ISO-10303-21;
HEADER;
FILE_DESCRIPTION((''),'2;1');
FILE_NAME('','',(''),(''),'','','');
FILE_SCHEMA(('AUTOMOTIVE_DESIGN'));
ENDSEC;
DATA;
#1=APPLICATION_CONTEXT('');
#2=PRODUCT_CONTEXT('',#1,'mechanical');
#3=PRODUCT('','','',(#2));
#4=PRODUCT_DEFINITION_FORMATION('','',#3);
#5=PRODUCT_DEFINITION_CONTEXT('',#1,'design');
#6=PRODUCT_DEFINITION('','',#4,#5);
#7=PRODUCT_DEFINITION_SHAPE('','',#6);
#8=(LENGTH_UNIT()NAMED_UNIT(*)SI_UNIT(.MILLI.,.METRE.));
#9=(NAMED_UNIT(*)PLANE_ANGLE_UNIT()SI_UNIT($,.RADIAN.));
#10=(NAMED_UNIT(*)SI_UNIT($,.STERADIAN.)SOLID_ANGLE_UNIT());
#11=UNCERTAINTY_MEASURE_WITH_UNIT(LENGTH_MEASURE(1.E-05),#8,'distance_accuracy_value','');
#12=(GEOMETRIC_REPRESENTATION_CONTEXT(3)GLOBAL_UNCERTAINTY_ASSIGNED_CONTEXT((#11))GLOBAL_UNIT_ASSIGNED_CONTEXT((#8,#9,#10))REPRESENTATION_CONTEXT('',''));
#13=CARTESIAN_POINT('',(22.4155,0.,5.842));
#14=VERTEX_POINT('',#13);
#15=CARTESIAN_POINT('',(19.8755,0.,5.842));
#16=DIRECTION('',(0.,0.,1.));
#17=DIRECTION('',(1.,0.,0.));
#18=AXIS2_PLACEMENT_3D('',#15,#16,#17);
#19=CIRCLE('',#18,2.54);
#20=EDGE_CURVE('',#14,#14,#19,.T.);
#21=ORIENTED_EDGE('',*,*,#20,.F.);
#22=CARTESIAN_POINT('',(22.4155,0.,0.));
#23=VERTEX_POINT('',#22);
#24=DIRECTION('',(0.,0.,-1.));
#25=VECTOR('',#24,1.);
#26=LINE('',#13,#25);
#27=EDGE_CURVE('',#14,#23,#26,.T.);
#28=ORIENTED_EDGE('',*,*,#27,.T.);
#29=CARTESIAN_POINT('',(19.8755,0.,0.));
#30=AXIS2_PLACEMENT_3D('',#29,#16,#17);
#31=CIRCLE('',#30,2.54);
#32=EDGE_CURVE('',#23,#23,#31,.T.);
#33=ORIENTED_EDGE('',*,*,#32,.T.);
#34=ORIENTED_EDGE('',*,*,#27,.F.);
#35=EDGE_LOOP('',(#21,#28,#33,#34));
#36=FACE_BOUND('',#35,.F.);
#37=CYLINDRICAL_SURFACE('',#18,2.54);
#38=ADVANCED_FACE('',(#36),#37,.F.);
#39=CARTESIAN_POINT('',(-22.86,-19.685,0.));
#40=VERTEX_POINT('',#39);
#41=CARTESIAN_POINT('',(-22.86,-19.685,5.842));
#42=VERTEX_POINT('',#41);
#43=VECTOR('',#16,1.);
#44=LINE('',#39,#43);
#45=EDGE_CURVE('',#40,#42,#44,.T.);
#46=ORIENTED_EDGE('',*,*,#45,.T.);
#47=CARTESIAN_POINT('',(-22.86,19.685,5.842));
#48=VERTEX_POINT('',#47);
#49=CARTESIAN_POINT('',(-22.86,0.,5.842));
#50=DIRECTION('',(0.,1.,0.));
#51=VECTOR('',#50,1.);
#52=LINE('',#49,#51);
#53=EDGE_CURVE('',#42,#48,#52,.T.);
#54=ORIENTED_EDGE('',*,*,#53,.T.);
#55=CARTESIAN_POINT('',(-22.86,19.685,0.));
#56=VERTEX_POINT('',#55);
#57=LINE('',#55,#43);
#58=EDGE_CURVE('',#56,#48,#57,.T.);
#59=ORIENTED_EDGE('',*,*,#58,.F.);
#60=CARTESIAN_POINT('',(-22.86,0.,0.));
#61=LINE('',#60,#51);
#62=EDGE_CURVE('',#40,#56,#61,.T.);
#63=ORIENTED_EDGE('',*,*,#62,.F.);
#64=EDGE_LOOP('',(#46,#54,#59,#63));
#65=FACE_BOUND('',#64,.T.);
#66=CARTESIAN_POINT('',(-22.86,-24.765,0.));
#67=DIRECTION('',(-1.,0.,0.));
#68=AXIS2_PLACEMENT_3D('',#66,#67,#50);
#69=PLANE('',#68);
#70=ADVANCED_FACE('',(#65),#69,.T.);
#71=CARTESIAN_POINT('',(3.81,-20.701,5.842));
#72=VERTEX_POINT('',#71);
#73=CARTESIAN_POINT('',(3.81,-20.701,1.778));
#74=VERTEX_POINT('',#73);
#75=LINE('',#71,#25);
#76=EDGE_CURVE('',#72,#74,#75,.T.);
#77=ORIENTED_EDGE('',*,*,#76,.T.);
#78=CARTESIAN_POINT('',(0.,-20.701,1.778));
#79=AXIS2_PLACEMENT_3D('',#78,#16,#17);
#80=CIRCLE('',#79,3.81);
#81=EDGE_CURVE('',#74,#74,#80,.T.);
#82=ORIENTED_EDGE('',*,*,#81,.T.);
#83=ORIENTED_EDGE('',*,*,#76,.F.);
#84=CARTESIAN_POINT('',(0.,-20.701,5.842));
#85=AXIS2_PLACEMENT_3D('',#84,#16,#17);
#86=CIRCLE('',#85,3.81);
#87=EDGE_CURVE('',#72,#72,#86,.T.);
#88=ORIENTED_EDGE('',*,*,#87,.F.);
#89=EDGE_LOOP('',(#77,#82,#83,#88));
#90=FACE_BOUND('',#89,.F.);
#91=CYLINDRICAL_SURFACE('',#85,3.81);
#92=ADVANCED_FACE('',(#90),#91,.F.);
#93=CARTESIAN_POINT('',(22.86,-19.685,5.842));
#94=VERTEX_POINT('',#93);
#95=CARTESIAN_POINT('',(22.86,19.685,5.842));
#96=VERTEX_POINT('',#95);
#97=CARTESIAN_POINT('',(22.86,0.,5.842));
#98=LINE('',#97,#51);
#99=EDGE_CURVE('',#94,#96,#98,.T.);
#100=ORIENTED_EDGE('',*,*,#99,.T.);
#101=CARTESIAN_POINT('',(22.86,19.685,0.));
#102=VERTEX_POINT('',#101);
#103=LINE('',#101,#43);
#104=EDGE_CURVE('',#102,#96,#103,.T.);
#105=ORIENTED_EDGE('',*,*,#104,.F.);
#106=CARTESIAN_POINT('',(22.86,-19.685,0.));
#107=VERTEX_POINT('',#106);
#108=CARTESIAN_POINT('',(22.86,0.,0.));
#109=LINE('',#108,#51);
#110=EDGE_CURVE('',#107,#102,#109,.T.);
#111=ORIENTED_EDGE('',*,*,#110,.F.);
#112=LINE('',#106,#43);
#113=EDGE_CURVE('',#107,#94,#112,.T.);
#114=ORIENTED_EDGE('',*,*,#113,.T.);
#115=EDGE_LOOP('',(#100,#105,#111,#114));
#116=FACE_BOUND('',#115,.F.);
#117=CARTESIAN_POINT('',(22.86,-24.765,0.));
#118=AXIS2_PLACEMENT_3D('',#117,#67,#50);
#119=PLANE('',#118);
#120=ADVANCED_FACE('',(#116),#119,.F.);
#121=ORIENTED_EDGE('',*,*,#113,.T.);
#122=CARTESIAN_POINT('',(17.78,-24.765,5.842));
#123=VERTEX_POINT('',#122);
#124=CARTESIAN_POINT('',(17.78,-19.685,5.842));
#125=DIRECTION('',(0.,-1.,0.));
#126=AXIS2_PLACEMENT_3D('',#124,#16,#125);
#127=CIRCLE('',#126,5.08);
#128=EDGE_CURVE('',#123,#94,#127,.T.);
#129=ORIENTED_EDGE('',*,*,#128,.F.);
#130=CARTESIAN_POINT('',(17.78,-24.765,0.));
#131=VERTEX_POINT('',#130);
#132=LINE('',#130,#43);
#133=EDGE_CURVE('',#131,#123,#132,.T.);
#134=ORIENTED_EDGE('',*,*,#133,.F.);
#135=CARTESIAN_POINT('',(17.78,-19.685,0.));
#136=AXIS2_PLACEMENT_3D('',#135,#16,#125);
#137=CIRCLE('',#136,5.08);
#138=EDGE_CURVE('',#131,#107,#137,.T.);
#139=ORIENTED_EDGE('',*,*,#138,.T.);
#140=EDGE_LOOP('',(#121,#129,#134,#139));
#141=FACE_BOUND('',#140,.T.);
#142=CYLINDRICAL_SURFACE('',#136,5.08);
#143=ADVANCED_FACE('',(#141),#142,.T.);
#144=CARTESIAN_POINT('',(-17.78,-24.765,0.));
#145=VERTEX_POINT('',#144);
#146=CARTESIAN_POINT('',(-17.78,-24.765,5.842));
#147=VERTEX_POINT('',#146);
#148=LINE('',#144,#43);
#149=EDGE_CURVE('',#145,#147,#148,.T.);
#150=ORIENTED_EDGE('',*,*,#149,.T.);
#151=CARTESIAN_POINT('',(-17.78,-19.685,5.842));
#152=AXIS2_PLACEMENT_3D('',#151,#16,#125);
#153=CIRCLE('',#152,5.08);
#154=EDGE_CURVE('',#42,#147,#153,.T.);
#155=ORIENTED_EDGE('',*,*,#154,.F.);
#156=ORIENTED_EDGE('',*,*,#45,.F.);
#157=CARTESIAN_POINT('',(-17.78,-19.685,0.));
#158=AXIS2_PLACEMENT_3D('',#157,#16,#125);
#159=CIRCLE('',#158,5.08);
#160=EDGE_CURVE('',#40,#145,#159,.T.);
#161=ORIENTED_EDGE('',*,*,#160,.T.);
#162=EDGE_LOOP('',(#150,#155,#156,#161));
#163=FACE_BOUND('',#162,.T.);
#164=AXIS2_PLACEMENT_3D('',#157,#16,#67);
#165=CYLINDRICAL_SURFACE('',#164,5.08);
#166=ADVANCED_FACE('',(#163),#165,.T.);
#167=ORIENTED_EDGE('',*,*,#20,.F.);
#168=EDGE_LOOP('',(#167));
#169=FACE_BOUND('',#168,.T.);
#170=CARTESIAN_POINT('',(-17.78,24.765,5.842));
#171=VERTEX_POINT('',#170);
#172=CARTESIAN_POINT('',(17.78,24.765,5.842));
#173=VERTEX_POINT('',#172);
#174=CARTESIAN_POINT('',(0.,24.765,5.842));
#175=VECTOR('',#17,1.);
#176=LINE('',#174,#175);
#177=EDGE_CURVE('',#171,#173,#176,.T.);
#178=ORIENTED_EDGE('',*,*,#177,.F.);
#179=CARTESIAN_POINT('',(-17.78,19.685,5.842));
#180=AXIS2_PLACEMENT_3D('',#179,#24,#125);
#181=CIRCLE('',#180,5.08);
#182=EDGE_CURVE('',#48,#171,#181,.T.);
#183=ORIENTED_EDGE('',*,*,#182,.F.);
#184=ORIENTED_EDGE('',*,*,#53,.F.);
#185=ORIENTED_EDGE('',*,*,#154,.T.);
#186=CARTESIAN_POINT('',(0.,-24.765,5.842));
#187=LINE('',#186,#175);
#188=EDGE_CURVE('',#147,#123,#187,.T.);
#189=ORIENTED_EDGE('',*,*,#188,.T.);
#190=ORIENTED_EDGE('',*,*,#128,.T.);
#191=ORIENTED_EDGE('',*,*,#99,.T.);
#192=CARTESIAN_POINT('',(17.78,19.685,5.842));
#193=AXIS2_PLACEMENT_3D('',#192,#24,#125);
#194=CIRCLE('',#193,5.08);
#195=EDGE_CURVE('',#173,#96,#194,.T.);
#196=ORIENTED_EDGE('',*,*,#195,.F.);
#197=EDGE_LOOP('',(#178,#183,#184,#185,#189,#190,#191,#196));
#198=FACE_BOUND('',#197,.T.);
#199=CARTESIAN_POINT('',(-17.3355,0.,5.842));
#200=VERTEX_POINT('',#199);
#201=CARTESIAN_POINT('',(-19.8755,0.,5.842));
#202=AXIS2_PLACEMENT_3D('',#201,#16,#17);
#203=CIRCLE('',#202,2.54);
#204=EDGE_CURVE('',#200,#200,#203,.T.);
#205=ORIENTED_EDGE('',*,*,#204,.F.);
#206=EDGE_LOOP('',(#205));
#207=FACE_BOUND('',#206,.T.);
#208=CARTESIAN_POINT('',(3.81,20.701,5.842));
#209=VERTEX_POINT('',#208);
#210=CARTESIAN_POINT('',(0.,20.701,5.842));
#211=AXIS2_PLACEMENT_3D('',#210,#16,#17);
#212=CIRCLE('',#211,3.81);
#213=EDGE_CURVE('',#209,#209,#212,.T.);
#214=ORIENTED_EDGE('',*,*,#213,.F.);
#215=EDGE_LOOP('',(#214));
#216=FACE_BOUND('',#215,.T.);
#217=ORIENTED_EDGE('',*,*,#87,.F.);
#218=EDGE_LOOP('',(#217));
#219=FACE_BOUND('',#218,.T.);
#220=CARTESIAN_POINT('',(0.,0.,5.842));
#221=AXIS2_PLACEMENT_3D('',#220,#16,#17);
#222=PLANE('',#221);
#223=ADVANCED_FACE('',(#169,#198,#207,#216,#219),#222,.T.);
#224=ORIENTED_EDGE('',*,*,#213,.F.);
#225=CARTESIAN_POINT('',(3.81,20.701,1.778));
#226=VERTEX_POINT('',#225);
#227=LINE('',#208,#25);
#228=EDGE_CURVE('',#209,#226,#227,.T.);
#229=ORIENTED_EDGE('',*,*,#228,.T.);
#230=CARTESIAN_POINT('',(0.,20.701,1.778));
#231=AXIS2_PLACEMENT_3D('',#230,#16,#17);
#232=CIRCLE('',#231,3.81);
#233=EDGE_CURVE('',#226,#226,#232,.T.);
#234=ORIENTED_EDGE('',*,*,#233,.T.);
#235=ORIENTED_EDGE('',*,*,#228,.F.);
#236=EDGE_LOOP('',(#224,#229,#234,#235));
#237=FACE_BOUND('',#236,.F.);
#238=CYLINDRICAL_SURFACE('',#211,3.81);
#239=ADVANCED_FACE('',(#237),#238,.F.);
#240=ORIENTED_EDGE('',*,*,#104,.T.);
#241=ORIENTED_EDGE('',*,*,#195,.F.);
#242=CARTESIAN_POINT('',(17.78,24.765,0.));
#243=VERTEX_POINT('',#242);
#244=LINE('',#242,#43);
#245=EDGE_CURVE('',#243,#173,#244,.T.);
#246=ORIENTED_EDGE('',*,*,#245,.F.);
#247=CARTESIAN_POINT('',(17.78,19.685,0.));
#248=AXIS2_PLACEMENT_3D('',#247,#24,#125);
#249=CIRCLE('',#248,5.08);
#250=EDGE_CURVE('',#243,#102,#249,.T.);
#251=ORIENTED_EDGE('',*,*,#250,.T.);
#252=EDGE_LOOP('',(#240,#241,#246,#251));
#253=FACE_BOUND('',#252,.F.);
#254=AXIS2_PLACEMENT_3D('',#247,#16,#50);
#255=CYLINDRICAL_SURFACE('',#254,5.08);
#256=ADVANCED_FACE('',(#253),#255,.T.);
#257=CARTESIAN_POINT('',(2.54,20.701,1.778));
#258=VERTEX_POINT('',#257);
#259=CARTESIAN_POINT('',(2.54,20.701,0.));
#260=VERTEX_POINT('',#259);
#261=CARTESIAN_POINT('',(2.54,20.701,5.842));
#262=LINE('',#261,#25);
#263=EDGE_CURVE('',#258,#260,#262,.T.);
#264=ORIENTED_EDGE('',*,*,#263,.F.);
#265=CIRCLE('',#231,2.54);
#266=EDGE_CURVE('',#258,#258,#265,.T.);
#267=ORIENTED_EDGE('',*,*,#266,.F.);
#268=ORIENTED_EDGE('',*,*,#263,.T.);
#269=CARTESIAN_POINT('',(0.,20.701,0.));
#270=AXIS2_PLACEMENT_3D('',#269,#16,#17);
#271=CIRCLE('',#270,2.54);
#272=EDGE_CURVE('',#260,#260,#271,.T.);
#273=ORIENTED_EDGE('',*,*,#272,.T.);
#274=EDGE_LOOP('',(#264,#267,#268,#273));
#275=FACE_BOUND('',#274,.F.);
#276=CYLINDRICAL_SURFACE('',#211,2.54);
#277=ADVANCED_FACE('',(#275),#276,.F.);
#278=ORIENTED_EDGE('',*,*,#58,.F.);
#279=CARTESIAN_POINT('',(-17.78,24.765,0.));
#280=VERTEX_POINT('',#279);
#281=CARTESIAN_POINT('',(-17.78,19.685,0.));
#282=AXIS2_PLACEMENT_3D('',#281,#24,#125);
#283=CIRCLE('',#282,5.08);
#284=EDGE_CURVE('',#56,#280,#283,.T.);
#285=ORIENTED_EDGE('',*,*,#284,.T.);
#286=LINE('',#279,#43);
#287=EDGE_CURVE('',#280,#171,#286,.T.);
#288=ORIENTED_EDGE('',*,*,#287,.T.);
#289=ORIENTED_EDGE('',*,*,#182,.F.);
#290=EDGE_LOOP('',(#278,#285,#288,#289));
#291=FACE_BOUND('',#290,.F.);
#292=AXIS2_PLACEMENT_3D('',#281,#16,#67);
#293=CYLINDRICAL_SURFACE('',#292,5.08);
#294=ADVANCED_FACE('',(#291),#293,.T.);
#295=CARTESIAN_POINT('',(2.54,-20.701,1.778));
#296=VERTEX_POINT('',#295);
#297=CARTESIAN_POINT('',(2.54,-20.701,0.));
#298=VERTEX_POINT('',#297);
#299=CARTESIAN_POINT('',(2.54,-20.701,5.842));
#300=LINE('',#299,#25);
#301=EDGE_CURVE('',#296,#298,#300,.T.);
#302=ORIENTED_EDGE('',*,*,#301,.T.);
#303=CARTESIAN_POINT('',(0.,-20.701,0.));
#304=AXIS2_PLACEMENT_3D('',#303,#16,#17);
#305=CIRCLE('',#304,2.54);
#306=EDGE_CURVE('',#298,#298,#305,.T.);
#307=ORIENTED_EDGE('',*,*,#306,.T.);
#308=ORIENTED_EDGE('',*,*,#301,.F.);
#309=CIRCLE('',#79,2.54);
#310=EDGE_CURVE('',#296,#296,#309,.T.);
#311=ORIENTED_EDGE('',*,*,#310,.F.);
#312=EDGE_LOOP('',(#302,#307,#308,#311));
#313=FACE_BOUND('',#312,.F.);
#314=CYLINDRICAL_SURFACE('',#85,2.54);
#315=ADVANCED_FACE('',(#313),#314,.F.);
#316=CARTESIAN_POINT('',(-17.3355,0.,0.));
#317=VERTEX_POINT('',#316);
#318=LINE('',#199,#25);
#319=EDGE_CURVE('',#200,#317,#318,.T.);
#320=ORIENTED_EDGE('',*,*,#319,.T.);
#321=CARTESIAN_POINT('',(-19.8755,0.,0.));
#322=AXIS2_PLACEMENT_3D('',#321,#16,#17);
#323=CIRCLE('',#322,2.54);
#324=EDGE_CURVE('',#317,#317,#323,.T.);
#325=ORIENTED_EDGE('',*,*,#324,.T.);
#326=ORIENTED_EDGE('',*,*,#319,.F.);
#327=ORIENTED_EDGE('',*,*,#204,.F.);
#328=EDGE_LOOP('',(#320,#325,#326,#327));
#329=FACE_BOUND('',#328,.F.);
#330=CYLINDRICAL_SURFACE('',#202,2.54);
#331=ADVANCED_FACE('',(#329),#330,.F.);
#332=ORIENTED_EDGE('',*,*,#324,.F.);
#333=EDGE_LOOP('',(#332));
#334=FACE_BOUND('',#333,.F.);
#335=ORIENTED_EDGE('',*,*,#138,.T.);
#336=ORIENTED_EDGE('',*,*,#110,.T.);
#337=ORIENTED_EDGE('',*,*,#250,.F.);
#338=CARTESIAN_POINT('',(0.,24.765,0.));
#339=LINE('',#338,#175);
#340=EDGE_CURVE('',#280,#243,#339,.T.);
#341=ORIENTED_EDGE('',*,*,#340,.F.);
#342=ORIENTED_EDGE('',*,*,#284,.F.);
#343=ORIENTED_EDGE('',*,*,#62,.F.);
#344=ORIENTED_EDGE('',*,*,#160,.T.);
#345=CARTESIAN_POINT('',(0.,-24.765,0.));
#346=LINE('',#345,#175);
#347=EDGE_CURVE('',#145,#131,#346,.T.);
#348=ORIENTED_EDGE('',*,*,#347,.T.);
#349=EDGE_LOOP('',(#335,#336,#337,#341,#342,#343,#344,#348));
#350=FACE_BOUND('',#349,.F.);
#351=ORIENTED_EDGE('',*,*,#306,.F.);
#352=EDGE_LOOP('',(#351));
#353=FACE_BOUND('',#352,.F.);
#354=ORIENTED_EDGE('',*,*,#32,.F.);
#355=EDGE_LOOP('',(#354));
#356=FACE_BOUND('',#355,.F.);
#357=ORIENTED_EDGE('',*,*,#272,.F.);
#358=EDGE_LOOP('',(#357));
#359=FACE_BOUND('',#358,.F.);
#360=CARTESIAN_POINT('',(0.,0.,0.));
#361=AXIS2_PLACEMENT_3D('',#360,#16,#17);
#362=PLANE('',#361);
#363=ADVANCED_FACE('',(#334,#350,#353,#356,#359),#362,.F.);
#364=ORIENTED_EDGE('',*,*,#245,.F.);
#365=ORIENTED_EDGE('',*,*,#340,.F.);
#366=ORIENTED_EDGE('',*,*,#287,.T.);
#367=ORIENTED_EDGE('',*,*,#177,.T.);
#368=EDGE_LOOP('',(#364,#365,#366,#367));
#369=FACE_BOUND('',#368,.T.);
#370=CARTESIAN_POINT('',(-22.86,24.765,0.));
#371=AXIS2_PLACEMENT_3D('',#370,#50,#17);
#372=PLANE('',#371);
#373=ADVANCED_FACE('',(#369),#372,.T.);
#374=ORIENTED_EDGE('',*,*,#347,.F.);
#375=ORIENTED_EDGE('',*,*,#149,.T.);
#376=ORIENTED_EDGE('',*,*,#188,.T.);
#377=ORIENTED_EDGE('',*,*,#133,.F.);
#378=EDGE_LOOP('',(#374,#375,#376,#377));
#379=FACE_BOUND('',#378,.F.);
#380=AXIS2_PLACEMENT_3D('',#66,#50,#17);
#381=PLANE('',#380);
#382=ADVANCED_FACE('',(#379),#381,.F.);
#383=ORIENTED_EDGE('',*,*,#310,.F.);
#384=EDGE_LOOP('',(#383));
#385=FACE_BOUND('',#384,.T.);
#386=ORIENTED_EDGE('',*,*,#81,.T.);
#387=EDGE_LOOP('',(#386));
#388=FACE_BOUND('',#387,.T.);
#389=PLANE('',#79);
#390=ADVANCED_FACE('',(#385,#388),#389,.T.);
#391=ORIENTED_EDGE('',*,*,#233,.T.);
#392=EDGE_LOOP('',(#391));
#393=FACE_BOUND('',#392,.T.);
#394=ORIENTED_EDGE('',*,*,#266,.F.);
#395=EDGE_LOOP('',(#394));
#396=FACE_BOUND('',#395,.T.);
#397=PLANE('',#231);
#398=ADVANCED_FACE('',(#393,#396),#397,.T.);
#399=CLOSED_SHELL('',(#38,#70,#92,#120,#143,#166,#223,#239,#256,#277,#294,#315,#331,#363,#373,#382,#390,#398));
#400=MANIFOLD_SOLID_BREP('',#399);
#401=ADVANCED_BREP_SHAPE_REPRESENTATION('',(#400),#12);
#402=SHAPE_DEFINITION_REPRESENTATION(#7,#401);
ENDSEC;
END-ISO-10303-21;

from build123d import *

# Parameters (mm, degrees)
F0_W     = 45.72
F0_H     = 49.53
F1_DEPTH = 5.842
F2_R     = 2.54
F3_DEPTH = 25.4
F4_R     = 3.81
F5_DEPTH = 4.064
F6_R     = 2.54
F7_DEPTH = 25.4
F8_R     = 5.08


# Not quite as in the source:
# - a feature names something its author has since deleted; it is built from what else it names


with BuildPart() as f1:
    # F0 (on Top) → F1 (new body)
    with BuildSketch(Plane.XY):
        Rectangle(F0_W, F0_H)
    extrude(amount=F1_DEPTH)

    # F2 (on face) → F3 (cut)
    with BuildSketch(Plane.XY.offset(5.842)):
        with Locations((-19.8755, 0)):
            Circle(F2_R)
        with Locations((19.8755, 0)):
            Circle(F2_R)
    extrude(amount=-F3_DEPTH, mode=Mode.SUBTRACT)

    # F4 (on face) → F5 (cut)
    with BuildSketch(Plane.XY.offset(5.842)):
        with Locations((0, 20.701)):
            Circle(F4_R)
        with Locations((0, -20.701)):
            Circle(F4_R)
    extrude(amount=-F5_DEPTH, mode=Mode.SUBTRACT)

    # F6 (on face) → F7 (cut)
    with BuildSketch(Plane.XY.offset(5.842)):
        with Locations((0, 20.701)):
            Circle(F6_R)
        with Locations((0, -20.701)):
            Circle(F6_R)
    extrude(amount=-F7_DEPTH, mode=Mode.SUBTRACT)

    # F8
    f8_edges = [f1.edges().sort_by_distance(p)[0] for p in [
        (-22.86, 24.765, 2.921),
        (-22.86, -24.765, 2.921),
        (22.86, -24.765, 2.921),
        (22.86, 24.765, 2.921),
    ]]
    fillet(f8_edges, radius=F8_R)


solid = f1.part
